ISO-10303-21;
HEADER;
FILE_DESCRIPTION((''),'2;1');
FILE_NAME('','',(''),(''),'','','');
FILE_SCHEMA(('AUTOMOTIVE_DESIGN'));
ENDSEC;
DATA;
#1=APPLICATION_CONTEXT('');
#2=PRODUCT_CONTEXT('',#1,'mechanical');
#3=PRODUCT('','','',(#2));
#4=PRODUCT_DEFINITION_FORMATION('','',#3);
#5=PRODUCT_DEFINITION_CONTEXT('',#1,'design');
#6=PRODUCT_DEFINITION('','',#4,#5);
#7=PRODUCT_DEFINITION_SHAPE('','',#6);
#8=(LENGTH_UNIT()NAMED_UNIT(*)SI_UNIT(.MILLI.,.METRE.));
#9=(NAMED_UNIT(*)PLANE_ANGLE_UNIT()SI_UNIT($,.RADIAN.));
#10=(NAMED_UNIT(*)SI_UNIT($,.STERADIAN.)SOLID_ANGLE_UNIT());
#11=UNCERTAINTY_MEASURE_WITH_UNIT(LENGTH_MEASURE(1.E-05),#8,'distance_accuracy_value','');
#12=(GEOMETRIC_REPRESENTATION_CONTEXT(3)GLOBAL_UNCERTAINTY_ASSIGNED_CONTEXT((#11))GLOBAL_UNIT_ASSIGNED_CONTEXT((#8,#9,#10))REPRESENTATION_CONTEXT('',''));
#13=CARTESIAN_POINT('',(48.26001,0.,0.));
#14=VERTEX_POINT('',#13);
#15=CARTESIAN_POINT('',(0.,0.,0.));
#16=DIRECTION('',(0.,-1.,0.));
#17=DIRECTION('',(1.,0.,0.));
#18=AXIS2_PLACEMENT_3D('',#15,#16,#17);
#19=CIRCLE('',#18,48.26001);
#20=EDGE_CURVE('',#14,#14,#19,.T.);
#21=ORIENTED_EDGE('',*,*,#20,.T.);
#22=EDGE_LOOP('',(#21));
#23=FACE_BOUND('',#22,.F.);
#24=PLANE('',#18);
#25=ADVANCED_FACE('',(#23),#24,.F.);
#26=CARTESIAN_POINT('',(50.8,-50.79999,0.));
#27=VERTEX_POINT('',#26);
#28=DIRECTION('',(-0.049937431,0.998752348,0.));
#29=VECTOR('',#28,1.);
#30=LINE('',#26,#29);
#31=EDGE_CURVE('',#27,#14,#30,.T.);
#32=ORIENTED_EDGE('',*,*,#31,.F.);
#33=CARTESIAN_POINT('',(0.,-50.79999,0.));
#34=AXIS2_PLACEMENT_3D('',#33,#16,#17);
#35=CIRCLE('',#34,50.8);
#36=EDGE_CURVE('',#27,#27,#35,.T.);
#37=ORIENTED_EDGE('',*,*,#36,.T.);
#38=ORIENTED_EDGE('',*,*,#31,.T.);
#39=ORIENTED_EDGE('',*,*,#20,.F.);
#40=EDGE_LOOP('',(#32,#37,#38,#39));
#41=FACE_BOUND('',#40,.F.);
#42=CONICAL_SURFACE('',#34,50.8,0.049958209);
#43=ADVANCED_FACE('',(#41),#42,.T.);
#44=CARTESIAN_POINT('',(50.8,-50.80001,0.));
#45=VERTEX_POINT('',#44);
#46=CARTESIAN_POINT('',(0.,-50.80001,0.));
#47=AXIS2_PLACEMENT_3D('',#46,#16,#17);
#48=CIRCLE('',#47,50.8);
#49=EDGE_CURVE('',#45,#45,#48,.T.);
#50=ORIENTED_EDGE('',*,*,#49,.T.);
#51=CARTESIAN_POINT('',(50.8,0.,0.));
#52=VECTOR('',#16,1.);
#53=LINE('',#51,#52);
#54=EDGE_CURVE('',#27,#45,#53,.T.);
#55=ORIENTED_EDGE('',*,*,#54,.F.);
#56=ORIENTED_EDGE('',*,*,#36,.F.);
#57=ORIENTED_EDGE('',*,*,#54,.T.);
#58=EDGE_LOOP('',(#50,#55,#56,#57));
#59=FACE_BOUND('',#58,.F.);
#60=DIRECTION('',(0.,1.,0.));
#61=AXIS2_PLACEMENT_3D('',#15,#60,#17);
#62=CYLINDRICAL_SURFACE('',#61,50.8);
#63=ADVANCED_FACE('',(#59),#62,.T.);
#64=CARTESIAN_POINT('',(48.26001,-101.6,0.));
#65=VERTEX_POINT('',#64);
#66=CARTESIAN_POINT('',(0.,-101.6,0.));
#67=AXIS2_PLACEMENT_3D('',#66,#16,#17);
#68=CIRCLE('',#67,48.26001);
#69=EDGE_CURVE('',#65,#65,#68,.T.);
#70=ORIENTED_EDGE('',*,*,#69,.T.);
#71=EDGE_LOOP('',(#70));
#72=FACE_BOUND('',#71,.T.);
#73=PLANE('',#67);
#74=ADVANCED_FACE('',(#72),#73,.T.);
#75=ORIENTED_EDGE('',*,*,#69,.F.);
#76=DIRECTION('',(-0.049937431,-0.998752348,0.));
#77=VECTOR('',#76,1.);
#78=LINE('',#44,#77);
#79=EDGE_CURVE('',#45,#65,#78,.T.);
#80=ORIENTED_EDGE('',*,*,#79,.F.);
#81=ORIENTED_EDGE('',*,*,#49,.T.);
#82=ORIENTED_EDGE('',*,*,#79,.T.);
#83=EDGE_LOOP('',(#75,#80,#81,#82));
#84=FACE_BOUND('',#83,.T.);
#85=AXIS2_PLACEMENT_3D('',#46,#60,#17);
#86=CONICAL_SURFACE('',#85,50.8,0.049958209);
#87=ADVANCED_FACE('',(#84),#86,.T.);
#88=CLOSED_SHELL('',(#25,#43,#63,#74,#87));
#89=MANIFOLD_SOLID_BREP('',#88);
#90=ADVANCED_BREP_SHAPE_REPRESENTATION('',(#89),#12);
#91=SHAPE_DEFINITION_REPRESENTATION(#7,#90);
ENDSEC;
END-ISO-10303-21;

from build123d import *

# Parameters (mm, degrees)
F0_R     = 50.8
F1_DEPTH = 101.6
F2_SIZE2 = 2.53999
F2_SIZE  = 50.79999


# Not quite as in the source:
# - a fillet or chamfer is up to 0.001 mm smaller than in the source, because OpenCascade refuses the exact size


with BuildPart() as f1:
    # F0 (on Front) → F1 (new body)
    with BuildSketch(Plane.XZ):
        Circle(F0_R)
    extrude(amount=F1_DEPTH)

    # F2 (size 50.8 and 2.54 in the source; OpenCascade refuses exactly that, so slightly less here)
    f2_edges = [f1.edges().sort_by_distance(p)[0] for p in [
        (50.8, -50.8, 0),
        (-50.8, 0, 0),
        (-50.8, -101.6, 0),
    ]]
    chamfer(f2_edges, length=F2_SIZE, length2=F2_SIZE2)


solid = f1.part
